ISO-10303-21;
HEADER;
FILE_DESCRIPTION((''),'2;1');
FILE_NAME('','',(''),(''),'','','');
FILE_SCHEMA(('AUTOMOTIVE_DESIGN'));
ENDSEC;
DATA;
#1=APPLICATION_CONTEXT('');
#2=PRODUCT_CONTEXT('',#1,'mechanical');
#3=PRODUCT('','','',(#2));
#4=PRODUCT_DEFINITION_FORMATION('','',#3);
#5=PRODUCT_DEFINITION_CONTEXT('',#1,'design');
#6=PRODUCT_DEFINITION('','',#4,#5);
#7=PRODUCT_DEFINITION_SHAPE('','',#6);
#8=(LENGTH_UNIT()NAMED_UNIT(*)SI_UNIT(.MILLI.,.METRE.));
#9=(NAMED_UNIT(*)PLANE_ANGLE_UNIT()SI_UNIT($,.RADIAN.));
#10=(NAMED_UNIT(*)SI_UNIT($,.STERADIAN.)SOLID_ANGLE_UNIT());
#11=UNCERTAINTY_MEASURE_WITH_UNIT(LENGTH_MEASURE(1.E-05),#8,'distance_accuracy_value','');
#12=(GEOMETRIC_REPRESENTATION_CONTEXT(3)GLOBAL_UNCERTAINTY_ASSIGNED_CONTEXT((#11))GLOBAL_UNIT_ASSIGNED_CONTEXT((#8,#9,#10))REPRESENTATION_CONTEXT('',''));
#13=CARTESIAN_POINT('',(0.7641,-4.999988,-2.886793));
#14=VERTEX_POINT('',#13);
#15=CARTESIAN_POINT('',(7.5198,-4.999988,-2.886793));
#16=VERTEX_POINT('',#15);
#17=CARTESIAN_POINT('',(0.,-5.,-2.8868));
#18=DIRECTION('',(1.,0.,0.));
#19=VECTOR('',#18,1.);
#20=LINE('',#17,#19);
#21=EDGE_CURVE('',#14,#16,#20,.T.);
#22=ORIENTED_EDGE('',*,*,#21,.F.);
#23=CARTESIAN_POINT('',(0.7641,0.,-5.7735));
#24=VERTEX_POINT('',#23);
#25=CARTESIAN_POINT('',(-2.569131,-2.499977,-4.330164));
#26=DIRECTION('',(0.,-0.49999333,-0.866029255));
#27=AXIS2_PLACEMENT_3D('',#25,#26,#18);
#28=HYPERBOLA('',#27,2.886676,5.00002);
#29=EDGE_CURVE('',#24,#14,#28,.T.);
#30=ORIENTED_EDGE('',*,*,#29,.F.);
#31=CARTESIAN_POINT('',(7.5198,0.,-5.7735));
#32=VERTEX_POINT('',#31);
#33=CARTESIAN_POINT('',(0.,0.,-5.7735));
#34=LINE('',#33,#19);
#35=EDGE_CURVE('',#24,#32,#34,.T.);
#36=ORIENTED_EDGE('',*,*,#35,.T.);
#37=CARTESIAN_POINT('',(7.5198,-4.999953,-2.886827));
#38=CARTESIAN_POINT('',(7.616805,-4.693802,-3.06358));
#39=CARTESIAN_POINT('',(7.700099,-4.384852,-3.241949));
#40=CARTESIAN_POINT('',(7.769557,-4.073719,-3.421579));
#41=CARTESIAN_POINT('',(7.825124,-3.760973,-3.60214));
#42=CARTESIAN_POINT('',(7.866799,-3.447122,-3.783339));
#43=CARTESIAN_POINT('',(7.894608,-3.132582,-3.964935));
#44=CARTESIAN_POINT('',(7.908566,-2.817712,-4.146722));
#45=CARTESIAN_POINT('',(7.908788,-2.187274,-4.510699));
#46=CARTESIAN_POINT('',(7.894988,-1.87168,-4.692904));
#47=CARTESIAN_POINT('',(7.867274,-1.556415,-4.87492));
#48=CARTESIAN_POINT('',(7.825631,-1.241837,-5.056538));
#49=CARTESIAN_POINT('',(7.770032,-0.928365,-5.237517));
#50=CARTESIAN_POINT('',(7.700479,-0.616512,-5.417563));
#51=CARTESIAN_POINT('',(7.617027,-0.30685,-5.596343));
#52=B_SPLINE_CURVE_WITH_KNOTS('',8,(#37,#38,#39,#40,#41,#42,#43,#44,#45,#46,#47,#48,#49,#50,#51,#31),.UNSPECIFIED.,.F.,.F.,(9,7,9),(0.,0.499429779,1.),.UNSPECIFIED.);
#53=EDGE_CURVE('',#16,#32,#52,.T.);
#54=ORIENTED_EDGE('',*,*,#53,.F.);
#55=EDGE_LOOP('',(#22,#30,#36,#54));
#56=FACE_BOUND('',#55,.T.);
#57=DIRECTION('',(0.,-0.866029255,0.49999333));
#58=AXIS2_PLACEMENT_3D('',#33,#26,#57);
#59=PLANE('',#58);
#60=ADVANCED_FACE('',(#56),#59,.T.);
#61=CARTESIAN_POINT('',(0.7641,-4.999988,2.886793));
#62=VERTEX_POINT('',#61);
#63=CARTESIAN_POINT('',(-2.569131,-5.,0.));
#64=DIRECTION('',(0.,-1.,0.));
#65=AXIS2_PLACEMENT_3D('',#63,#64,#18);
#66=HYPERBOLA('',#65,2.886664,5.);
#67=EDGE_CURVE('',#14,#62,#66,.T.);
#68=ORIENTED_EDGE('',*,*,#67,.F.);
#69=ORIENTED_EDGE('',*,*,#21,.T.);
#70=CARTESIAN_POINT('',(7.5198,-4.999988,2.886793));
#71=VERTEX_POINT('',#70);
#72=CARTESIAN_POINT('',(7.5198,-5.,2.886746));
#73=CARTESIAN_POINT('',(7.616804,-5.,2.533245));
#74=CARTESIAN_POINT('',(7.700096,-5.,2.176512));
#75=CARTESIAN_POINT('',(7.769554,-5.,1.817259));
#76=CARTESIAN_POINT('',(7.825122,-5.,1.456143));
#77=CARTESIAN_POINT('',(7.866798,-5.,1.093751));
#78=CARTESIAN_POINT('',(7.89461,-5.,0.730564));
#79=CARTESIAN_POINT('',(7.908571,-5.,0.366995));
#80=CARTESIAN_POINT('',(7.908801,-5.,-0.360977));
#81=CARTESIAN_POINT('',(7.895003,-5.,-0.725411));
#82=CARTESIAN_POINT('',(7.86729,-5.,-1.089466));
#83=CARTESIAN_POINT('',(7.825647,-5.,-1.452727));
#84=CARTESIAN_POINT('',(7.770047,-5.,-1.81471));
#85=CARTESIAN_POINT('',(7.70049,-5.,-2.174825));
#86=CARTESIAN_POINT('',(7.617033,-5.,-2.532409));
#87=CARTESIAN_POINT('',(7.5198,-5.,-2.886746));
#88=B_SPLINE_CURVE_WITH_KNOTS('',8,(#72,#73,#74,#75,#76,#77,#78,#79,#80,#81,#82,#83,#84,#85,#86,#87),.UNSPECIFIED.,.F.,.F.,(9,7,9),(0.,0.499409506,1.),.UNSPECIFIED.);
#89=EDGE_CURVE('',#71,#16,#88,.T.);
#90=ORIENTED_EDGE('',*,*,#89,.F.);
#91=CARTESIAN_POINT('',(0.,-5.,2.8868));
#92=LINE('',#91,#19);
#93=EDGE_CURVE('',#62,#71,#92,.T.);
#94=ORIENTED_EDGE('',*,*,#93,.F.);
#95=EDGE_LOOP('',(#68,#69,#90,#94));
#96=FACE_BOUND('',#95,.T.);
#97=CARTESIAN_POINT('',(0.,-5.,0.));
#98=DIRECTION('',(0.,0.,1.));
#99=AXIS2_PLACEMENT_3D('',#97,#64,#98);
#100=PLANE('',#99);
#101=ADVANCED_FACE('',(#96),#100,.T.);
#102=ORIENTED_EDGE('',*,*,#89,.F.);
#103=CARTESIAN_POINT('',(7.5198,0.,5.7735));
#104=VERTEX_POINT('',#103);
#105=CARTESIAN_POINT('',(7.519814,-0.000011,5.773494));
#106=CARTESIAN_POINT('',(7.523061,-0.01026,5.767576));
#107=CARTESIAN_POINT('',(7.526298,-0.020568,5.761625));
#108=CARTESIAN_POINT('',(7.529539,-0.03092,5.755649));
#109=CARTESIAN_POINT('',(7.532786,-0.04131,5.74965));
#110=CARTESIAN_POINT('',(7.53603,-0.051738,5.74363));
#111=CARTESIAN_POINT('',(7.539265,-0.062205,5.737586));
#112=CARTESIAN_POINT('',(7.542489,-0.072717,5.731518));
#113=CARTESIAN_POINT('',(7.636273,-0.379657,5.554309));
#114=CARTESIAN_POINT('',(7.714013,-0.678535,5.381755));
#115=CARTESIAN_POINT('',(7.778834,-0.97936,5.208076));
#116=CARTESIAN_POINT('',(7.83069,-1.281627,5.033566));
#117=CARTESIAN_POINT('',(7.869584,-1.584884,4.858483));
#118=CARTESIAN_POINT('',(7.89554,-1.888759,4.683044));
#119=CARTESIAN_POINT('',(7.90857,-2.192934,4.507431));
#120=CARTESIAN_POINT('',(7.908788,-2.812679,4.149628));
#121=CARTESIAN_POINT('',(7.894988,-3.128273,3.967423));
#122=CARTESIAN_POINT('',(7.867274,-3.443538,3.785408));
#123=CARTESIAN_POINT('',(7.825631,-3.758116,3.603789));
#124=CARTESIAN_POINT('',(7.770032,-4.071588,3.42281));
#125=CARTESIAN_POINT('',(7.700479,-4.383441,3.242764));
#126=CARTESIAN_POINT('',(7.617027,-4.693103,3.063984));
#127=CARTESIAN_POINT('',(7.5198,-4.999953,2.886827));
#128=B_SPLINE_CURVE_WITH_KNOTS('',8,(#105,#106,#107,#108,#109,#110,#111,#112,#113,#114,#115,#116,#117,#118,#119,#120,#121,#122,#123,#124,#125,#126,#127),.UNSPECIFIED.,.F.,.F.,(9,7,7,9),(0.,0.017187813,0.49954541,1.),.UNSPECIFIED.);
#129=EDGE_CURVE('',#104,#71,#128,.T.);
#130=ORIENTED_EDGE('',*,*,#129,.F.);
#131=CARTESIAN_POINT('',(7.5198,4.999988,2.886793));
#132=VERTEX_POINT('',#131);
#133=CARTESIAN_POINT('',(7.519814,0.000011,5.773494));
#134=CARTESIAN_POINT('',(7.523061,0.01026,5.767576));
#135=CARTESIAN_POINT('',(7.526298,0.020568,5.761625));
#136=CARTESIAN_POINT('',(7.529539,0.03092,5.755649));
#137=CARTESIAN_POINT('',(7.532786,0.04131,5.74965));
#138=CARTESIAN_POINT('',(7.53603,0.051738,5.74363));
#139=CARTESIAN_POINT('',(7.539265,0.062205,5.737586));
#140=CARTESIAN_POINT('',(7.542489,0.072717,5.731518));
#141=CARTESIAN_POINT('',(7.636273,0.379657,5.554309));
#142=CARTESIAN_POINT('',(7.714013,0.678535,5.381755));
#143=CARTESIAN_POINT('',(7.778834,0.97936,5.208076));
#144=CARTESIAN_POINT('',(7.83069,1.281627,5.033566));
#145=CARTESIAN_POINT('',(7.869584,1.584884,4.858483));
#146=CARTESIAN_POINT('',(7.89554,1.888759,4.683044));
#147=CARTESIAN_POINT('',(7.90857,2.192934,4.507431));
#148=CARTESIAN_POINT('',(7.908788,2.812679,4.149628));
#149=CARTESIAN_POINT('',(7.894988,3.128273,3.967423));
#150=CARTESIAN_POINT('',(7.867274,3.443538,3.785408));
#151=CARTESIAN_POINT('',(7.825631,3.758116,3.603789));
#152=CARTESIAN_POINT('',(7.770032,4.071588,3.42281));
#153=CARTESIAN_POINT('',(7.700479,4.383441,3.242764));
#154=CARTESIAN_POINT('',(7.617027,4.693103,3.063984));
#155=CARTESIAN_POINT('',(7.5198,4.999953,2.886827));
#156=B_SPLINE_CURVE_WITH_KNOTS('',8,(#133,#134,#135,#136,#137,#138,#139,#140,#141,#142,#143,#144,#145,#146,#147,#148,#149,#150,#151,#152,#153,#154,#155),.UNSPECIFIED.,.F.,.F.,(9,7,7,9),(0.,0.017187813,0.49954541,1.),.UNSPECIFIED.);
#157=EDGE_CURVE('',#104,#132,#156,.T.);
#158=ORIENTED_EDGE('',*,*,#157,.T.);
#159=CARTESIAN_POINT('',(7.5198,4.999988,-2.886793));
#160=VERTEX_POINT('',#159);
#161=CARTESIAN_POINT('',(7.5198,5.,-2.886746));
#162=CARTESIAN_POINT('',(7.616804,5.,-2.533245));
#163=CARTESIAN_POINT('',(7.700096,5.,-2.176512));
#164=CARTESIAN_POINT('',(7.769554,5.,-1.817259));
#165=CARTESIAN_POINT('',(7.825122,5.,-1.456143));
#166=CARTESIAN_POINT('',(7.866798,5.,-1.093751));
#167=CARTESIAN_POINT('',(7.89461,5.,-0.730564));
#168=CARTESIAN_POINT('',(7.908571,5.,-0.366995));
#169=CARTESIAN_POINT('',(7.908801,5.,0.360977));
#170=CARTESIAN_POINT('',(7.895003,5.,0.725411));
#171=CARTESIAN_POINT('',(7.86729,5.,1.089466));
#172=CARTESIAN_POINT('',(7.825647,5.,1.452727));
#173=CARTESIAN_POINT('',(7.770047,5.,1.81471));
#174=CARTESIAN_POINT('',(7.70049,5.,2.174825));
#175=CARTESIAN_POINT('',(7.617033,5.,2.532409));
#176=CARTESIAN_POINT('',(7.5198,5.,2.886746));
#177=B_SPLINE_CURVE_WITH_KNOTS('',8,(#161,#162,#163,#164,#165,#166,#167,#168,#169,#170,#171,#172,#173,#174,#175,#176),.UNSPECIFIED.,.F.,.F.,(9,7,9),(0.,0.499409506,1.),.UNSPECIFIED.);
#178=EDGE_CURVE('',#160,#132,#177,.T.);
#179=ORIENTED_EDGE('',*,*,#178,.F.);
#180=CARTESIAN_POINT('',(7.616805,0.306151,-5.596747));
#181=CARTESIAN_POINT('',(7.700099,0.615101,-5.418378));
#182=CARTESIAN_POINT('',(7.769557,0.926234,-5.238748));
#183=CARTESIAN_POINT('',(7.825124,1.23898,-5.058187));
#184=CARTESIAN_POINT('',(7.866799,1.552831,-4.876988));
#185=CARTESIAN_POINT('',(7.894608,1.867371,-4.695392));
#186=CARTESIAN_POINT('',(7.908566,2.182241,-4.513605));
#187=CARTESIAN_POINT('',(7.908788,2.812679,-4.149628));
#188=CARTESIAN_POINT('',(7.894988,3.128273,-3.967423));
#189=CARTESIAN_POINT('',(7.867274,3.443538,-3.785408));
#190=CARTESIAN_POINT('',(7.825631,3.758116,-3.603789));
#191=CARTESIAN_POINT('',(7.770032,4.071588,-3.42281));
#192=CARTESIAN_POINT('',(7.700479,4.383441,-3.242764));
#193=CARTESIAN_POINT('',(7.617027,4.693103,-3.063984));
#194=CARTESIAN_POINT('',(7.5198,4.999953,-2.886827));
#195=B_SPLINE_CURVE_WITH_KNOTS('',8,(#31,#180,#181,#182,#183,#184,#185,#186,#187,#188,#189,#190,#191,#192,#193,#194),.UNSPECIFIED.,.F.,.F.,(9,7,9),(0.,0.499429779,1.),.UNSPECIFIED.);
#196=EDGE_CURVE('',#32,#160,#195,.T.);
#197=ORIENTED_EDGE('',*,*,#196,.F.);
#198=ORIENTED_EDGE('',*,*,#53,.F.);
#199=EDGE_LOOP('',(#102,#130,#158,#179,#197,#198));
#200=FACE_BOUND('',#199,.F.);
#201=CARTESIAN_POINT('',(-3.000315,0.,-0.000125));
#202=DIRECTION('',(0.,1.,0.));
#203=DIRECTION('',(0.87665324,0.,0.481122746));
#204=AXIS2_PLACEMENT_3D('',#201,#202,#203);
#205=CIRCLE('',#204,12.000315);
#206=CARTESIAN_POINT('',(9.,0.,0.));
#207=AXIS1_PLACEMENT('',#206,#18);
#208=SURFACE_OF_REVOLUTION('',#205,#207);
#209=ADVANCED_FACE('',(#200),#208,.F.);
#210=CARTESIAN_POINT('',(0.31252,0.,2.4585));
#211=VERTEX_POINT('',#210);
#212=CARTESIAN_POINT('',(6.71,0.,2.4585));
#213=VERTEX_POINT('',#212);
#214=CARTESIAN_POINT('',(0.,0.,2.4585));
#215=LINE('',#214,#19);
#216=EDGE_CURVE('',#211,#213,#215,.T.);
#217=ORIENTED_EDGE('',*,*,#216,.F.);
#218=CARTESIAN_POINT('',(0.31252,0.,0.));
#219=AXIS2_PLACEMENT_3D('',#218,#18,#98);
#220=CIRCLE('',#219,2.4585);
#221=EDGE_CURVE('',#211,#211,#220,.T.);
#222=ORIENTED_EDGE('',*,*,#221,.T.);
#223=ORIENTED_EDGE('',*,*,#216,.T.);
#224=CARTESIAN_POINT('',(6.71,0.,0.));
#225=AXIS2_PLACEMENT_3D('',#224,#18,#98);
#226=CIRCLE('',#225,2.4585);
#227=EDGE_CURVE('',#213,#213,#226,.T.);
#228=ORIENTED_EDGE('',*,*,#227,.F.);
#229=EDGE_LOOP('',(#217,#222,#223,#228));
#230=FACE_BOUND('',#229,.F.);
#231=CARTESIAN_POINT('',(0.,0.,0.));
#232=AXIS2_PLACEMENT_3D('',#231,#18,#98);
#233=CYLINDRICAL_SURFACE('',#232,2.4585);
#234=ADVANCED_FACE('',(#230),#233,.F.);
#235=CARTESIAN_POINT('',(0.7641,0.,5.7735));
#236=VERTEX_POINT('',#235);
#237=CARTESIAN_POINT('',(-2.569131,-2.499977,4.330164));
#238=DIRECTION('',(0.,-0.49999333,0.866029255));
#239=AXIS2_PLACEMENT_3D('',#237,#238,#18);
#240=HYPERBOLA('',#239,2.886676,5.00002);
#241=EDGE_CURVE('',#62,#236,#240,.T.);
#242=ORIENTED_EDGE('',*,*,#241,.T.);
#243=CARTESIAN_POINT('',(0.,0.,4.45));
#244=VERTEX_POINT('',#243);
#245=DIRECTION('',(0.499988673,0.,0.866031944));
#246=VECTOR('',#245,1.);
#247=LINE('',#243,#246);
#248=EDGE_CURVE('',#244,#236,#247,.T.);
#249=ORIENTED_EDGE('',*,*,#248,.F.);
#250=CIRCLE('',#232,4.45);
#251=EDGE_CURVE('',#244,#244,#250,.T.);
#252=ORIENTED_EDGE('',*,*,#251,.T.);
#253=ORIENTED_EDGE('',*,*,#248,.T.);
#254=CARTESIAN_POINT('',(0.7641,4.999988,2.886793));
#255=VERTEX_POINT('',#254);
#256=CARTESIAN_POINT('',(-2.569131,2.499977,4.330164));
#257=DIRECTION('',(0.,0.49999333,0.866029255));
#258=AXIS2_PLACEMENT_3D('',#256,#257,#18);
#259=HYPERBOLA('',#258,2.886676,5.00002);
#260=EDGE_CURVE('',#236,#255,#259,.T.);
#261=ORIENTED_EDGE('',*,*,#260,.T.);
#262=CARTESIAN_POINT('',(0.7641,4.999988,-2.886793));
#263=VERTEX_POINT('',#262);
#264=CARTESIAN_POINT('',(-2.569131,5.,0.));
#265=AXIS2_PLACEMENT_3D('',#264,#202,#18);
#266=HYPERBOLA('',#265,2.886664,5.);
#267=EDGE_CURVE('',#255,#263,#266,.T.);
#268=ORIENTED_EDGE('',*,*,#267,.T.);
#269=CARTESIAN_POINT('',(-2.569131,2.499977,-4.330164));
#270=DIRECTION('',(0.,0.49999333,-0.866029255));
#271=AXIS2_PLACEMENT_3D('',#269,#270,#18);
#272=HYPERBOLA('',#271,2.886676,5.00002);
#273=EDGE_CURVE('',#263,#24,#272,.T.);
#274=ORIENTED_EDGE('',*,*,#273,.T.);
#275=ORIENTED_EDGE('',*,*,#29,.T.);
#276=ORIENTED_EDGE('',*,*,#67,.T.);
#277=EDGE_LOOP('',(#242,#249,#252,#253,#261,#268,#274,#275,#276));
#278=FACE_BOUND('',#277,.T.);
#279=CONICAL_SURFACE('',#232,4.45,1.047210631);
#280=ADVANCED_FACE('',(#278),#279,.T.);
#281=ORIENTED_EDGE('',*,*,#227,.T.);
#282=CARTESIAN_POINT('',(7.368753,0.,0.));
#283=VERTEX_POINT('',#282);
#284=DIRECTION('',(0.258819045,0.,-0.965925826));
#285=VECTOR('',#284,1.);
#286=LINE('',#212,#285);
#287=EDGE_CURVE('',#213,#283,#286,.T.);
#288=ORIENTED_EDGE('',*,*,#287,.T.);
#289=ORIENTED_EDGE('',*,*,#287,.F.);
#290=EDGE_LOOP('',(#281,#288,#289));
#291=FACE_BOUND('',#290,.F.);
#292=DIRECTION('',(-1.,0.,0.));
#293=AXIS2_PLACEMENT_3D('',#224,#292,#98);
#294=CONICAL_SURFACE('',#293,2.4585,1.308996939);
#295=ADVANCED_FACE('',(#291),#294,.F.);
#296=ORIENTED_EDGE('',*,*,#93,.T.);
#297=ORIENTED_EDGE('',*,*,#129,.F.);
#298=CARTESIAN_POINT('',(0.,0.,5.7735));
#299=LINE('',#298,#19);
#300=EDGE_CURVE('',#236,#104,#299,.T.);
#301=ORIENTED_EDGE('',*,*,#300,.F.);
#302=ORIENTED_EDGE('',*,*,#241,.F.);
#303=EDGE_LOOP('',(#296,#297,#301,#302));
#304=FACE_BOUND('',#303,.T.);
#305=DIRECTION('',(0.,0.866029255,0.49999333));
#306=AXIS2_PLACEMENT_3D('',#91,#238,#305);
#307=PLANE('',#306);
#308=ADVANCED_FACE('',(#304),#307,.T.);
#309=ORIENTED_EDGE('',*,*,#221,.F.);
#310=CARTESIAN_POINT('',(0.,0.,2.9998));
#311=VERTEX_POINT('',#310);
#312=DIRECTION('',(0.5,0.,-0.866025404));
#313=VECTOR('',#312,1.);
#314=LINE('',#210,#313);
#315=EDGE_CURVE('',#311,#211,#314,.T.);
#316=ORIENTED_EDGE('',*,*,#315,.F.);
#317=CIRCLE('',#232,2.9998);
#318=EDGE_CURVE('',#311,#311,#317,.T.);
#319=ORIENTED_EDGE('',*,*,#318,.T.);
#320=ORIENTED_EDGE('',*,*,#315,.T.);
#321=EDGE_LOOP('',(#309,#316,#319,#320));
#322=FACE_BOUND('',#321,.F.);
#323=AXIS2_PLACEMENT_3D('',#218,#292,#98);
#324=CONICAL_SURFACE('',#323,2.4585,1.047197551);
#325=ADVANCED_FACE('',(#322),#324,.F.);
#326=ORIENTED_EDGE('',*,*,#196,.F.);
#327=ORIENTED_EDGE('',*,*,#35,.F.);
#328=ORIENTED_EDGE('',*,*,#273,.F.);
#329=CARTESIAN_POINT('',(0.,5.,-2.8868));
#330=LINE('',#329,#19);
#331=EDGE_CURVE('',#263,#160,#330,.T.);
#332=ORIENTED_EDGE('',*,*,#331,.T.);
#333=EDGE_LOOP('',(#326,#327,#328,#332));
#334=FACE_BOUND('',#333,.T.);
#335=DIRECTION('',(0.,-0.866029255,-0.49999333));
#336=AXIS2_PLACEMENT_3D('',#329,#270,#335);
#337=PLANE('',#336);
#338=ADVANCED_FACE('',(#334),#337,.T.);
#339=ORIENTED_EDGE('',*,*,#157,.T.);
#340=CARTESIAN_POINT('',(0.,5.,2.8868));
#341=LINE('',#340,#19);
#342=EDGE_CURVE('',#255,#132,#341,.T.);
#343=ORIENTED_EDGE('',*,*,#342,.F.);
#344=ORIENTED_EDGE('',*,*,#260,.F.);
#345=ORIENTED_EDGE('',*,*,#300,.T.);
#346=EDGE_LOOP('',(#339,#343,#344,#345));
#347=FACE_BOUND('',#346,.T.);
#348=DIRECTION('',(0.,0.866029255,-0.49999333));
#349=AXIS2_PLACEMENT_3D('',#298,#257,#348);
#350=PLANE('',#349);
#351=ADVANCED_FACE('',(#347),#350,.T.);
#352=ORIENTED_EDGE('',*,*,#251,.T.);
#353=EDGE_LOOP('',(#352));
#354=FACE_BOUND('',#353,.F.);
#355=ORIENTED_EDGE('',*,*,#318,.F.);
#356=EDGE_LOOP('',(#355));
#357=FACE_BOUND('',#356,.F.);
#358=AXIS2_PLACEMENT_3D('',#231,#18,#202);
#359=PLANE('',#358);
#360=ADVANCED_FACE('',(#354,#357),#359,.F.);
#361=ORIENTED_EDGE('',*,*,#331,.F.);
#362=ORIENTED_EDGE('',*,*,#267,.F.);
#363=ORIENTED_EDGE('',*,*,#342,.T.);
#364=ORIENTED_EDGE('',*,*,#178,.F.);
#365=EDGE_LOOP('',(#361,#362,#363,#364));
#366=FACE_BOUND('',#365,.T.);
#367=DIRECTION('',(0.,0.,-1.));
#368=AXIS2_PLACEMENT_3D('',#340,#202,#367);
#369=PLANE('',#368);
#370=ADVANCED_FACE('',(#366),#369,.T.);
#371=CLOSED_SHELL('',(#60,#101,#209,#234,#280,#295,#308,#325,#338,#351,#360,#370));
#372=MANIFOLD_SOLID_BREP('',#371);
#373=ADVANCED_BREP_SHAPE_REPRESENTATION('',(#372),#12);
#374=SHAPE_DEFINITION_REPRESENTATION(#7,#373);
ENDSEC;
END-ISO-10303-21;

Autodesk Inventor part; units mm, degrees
ref_plane "YZ Plane" through (0, 0, 0) normal (1, 0, 0) x (0, 1, 0)
ref_plane "XZ Plane" through (0, 0, 0) normal (0, 1, 0) x (-1, 0, 0)
sketch "Sketch1" plane through (0, 0, 0) normal (1, 0, 0) x (0, 1, 0)
  line L0 (-7, 0) -> (7, 0) projected
  line L1 (0, -8.0829) -> (0, 8.0829) projected
  line L2 (0, 5.7735) -> (5, 2.8868)
  line L3 (5, 2.8868) -> (5, -2.8868)
  line L4 (5, -2.8868) -> (0, -5.7735)
  line L5 (0, -5.7735) -> (-5, -2.8868)
  line L6 (-5, -2.8868) -> (-5, 2.8868)
  line L7 (-5, 2.8868) -> (0, 5.7735)
  point P0 (0, 0)
  dimension "d0" = 10
extrude "Body" add sketch "Sketch1" along normal blind 9
sketch "Sketch2" plane through (0, 0, 0) normal (-1, 0, 0) x (0, 0, 1)
  line L0 (0, -7) -> (0, 7) projected
  line L1 (-8.0829, 0) -> (8.0829, 0) projected
  point P0 (0, 0)
hole "Thread" at (0, 0, 0) direction (1, 0, 0) diameter 4.917 depth 6.71 tip angle 150 thread size "M6x1" class "6H" standard "ISO Metric profile"
chamfer "Chamfer1" distance 0.5413 angle 30 1 edges at (0, 0, -2.4585) measured on face at (0, 4.1469, 0.0988)
sketch "Sketch3" plane through (0, 0, 0) normal (0, 1, 0) x (-1, 0, 0)
  line L0 (0, -2.8868) -> (0, 2.8868) projected
  line L1 (0, 4.45) -> (-0.7641, 5.7735)
  line L2 (-0.7641, 5.7735) -> (0, 5.7735)
  line L3 (0, 5.7735) -> (0, 4.45)
  line L4 (0, 2.8868) -> (0, -2.8868) projected
  line L5 (0, 5.7735) -> (-9, 5.7735) projected
  line L6 (5.4728, 0) -> (-11.837, 0) projected
  line L7 (-9, 5.7735) -> (-9, 0)
  arc A0 (-7.5198, 5.7735) -> (-9, 0) centre (3, 0) ccw
  line L8 (-9, 5.7735) -> (-7.5198, 5.7735)
  dimension "d12" = 8.9
  dimension "d13" = 30
  dimension "d14" = 12
revolve "Chamfer2" cut sketch "Sketch3" angle 360 about axis through (-10, 0, 0) along (1, 0, 0) contours L1 L2 L3
revolve "Cut1" cut sketch "Sketch3" angle 360 about axis through (-10, 0, 0) along (1, 0, 0) contours A0 L7 L5
ref_plane "Work Plane1" through (7.0394, 0, 0) normal (0, 1, 0) x (-1, 0, 0)
equation "\"d0\" = SW"
equation "\"d1\" = GEL"
equation "\"d8\" = KOH1"
equation "\"d10\" = -0.5 * GD1 + 0.5 * NND"
equation "\"d20\" = -0.5 * GD1 + 0.5 * NND"
equation "\"d12\" = SW0"
equation "\"d13\" = ANG1"
equation "\"d14\" = KR"
equation "\"ANG1\" = 30deg"
equation "\"NND\" = 6"
equation "\"GEL\" = 9"
equation "\"KOH1\" = 6.71"
equation "\"SW\" = 10"
equation "\"KR\" = 12"
equation "\"SW0\" = 8.9"
equation "\"GUL\" = 0.541266 * PTC"
equation "\"THREADDIA\" = 6"
equation "\"TOA\" = 30deg"
equation "\"PTC\" = 1"
equation "\"E0\" = 1.155 * SW"
equation "\"GAL\" = 0.541266 * PTC"
equation "\"GD1\" = 4.917468"
properties part number "DIN 917 - M6" material "Steel, Mild"
